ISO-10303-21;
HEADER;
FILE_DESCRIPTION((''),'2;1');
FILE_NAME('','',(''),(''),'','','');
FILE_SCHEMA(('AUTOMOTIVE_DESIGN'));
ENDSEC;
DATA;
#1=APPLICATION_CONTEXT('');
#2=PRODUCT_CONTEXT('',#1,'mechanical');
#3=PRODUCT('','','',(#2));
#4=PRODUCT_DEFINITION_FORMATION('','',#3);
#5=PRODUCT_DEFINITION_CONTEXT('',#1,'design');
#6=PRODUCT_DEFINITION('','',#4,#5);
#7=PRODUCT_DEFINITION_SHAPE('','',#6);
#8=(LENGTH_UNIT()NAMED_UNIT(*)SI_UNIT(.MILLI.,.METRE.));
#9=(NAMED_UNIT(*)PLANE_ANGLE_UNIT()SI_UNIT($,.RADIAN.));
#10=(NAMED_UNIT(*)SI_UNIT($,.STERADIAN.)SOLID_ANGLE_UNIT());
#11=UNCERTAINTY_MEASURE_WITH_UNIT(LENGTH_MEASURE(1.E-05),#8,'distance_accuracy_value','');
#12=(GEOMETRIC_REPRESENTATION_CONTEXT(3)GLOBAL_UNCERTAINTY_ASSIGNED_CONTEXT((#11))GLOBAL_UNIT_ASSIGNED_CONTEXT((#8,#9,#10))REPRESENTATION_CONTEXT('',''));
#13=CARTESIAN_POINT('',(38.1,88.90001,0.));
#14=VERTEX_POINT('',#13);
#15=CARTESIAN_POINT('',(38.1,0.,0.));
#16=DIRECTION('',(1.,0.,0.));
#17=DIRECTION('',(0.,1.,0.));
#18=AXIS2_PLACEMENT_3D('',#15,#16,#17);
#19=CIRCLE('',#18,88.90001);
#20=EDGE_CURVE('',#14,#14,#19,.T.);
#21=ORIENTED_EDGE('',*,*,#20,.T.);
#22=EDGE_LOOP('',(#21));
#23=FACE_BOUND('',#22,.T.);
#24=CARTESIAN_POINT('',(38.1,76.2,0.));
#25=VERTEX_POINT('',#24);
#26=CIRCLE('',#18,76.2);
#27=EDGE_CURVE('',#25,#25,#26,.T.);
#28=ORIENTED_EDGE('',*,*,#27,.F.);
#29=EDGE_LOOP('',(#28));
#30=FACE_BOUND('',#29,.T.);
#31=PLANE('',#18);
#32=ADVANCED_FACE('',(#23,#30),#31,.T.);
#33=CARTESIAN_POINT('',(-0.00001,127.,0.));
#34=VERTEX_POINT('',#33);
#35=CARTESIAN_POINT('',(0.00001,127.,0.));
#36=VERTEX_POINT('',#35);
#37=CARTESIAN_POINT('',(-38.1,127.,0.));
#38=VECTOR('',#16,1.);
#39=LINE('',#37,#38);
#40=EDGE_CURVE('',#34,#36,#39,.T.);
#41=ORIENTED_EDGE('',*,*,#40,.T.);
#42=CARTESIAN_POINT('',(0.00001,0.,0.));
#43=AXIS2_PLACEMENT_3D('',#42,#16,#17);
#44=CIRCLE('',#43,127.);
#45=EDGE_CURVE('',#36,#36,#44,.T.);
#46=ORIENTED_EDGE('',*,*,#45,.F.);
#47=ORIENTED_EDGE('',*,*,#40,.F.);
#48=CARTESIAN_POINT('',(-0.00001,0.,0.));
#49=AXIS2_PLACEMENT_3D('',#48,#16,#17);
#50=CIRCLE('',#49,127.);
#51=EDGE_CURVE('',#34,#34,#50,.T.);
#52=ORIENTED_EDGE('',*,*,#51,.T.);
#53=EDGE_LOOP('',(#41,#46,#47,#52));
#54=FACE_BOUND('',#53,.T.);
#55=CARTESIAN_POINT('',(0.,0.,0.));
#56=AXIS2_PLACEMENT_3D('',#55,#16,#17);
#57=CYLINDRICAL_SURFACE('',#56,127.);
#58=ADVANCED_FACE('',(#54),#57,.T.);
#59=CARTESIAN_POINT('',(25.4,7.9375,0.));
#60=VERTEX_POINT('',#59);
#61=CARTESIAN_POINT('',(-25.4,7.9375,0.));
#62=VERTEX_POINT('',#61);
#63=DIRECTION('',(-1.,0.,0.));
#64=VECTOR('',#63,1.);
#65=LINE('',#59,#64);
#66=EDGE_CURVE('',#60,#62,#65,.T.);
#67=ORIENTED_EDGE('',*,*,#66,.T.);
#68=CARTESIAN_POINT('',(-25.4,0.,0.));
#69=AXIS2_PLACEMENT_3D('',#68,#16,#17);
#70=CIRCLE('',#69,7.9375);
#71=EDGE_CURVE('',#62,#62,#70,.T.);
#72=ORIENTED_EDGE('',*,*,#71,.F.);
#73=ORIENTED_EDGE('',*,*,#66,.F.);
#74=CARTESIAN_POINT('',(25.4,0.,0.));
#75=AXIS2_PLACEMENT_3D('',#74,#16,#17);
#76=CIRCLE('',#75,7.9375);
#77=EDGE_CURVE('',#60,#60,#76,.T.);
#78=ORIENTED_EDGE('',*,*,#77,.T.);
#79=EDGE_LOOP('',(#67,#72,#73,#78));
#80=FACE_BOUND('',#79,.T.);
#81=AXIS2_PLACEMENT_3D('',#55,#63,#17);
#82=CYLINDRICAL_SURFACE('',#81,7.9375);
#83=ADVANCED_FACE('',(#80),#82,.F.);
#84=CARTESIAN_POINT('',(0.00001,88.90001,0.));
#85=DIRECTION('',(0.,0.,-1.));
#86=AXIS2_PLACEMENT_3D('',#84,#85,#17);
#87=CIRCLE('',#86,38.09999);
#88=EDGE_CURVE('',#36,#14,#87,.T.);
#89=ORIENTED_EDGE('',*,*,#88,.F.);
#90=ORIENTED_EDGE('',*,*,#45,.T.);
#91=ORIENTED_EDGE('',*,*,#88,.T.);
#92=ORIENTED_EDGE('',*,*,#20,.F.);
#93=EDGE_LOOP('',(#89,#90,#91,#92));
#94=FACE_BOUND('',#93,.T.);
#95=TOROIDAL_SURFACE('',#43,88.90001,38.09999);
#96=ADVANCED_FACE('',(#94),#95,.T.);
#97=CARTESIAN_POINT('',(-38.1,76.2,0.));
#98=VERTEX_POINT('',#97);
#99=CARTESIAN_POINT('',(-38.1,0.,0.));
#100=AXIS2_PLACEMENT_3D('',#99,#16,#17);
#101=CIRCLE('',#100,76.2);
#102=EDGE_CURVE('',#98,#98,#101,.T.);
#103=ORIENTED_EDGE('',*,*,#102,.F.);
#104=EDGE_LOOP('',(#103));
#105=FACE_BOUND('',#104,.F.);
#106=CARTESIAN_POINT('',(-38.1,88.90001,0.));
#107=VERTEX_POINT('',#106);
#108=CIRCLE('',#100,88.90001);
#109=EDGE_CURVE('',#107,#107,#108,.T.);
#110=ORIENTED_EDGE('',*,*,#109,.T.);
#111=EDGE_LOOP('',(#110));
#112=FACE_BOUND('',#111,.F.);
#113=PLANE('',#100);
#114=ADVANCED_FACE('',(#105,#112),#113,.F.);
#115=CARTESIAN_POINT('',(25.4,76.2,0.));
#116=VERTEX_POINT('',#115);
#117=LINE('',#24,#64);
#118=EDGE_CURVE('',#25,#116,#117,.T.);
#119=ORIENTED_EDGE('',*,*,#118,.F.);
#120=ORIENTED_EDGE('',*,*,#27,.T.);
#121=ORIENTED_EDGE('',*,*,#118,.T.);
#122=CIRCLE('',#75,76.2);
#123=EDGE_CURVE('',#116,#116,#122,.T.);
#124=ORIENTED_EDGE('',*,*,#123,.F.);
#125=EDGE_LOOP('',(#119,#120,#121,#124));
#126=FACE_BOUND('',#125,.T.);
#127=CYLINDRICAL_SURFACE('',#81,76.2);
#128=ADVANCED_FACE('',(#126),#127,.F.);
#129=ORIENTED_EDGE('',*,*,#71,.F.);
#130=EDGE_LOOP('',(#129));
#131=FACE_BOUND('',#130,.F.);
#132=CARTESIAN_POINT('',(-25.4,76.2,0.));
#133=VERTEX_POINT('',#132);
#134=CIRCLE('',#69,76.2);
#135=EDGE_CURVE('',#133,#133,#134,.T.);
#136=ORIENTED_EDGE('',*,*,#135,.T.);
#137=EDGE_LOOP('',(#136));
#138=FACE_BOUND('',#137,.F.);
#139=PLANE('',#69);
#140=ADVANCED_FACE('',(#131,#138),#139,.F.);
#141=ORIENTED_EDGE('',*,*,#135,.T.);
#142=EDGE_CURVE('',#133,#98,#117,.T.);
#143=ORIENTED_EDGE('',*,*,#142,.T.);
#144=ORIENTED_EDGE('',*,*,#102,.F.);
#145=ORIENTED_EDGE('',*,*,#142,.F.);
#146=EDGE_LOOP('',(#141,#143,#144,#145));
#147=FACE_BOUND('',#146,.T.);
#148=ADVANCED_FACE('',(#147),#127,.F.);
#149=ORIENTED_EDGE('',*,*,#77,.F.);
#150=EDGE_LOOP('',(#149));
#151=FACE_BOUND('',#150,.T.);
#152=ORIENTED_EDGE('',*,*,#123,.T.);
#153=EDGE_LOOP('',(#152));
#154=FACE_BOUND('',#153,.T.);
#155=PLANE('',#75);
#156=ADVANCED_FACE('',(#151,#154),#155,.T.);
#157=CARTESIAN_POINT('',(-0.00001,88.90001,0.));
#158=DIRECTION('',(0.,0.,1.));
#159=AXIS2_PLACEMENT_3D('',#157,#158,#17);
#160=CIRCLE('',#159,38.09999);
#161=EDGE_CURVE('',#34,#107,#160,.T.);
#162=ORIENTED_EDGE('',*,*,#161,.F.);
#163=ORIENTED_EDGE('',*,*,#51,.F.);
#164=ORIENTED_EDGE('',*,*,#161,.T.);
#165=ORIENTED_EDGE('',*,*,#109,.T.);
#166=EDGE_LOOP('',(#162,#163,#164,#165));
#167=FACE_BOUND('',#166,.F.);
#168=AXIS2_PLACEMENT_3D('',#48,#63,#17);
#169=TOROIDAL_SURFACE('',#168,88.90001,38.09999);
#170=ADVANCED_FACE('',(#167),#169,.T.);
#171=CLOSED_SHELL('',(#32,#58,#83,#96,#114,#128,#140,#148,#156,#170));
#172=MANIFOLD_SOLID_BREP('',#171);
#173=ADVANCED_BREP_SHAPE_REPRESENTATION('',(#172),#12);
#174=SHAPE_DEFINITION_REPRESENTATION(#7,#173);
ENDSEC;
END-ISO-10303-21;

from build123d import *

# Parameters (mm, degrees)
F0_R     = 127
F0_R_2   = 76.2
F1_DEPTH = 38.1
F2_R     = 38.09999
F0_R_3   = 7.9375
F3_DEPTH = 25.4


# Not quite as in the source:
# - a fillet or chamfer is up to 0.001 mm smaller than in the source, because OpenCascade refuses the exact size


with BuildPart() as f1:
    # F0 (on Right) → F1 (new body, symmetric)
    with BuildSketch(Plane.YZ):
        Circle(F0_R)
        Circle(F0_R_2, mode=Mode.SUBTRACT)
    extrude(amount=F1_DEPTH, both=True)

    # F2 (radius 38.1 in the source; OpenCascade refuses exactly that, so slightly less here)
    f2_edges = [f1.edges().sort_by_distance(p)[0] for p in [
        (38.1, -127, 0),
        (-38.1, -127, 0),
    ]]
    fillet(f2_edges, radius=F2_R)

    # F0 (on Right) → F3 (join, symmetric)
    with BuildSketch(Plane.YZ):
        Circle(F0_R_2)
        Circle(F0_R_3, mode=Mode.SUBTRACT)
    extrude(amount=F3_DEPTH, both=True)


solid = f1.part
